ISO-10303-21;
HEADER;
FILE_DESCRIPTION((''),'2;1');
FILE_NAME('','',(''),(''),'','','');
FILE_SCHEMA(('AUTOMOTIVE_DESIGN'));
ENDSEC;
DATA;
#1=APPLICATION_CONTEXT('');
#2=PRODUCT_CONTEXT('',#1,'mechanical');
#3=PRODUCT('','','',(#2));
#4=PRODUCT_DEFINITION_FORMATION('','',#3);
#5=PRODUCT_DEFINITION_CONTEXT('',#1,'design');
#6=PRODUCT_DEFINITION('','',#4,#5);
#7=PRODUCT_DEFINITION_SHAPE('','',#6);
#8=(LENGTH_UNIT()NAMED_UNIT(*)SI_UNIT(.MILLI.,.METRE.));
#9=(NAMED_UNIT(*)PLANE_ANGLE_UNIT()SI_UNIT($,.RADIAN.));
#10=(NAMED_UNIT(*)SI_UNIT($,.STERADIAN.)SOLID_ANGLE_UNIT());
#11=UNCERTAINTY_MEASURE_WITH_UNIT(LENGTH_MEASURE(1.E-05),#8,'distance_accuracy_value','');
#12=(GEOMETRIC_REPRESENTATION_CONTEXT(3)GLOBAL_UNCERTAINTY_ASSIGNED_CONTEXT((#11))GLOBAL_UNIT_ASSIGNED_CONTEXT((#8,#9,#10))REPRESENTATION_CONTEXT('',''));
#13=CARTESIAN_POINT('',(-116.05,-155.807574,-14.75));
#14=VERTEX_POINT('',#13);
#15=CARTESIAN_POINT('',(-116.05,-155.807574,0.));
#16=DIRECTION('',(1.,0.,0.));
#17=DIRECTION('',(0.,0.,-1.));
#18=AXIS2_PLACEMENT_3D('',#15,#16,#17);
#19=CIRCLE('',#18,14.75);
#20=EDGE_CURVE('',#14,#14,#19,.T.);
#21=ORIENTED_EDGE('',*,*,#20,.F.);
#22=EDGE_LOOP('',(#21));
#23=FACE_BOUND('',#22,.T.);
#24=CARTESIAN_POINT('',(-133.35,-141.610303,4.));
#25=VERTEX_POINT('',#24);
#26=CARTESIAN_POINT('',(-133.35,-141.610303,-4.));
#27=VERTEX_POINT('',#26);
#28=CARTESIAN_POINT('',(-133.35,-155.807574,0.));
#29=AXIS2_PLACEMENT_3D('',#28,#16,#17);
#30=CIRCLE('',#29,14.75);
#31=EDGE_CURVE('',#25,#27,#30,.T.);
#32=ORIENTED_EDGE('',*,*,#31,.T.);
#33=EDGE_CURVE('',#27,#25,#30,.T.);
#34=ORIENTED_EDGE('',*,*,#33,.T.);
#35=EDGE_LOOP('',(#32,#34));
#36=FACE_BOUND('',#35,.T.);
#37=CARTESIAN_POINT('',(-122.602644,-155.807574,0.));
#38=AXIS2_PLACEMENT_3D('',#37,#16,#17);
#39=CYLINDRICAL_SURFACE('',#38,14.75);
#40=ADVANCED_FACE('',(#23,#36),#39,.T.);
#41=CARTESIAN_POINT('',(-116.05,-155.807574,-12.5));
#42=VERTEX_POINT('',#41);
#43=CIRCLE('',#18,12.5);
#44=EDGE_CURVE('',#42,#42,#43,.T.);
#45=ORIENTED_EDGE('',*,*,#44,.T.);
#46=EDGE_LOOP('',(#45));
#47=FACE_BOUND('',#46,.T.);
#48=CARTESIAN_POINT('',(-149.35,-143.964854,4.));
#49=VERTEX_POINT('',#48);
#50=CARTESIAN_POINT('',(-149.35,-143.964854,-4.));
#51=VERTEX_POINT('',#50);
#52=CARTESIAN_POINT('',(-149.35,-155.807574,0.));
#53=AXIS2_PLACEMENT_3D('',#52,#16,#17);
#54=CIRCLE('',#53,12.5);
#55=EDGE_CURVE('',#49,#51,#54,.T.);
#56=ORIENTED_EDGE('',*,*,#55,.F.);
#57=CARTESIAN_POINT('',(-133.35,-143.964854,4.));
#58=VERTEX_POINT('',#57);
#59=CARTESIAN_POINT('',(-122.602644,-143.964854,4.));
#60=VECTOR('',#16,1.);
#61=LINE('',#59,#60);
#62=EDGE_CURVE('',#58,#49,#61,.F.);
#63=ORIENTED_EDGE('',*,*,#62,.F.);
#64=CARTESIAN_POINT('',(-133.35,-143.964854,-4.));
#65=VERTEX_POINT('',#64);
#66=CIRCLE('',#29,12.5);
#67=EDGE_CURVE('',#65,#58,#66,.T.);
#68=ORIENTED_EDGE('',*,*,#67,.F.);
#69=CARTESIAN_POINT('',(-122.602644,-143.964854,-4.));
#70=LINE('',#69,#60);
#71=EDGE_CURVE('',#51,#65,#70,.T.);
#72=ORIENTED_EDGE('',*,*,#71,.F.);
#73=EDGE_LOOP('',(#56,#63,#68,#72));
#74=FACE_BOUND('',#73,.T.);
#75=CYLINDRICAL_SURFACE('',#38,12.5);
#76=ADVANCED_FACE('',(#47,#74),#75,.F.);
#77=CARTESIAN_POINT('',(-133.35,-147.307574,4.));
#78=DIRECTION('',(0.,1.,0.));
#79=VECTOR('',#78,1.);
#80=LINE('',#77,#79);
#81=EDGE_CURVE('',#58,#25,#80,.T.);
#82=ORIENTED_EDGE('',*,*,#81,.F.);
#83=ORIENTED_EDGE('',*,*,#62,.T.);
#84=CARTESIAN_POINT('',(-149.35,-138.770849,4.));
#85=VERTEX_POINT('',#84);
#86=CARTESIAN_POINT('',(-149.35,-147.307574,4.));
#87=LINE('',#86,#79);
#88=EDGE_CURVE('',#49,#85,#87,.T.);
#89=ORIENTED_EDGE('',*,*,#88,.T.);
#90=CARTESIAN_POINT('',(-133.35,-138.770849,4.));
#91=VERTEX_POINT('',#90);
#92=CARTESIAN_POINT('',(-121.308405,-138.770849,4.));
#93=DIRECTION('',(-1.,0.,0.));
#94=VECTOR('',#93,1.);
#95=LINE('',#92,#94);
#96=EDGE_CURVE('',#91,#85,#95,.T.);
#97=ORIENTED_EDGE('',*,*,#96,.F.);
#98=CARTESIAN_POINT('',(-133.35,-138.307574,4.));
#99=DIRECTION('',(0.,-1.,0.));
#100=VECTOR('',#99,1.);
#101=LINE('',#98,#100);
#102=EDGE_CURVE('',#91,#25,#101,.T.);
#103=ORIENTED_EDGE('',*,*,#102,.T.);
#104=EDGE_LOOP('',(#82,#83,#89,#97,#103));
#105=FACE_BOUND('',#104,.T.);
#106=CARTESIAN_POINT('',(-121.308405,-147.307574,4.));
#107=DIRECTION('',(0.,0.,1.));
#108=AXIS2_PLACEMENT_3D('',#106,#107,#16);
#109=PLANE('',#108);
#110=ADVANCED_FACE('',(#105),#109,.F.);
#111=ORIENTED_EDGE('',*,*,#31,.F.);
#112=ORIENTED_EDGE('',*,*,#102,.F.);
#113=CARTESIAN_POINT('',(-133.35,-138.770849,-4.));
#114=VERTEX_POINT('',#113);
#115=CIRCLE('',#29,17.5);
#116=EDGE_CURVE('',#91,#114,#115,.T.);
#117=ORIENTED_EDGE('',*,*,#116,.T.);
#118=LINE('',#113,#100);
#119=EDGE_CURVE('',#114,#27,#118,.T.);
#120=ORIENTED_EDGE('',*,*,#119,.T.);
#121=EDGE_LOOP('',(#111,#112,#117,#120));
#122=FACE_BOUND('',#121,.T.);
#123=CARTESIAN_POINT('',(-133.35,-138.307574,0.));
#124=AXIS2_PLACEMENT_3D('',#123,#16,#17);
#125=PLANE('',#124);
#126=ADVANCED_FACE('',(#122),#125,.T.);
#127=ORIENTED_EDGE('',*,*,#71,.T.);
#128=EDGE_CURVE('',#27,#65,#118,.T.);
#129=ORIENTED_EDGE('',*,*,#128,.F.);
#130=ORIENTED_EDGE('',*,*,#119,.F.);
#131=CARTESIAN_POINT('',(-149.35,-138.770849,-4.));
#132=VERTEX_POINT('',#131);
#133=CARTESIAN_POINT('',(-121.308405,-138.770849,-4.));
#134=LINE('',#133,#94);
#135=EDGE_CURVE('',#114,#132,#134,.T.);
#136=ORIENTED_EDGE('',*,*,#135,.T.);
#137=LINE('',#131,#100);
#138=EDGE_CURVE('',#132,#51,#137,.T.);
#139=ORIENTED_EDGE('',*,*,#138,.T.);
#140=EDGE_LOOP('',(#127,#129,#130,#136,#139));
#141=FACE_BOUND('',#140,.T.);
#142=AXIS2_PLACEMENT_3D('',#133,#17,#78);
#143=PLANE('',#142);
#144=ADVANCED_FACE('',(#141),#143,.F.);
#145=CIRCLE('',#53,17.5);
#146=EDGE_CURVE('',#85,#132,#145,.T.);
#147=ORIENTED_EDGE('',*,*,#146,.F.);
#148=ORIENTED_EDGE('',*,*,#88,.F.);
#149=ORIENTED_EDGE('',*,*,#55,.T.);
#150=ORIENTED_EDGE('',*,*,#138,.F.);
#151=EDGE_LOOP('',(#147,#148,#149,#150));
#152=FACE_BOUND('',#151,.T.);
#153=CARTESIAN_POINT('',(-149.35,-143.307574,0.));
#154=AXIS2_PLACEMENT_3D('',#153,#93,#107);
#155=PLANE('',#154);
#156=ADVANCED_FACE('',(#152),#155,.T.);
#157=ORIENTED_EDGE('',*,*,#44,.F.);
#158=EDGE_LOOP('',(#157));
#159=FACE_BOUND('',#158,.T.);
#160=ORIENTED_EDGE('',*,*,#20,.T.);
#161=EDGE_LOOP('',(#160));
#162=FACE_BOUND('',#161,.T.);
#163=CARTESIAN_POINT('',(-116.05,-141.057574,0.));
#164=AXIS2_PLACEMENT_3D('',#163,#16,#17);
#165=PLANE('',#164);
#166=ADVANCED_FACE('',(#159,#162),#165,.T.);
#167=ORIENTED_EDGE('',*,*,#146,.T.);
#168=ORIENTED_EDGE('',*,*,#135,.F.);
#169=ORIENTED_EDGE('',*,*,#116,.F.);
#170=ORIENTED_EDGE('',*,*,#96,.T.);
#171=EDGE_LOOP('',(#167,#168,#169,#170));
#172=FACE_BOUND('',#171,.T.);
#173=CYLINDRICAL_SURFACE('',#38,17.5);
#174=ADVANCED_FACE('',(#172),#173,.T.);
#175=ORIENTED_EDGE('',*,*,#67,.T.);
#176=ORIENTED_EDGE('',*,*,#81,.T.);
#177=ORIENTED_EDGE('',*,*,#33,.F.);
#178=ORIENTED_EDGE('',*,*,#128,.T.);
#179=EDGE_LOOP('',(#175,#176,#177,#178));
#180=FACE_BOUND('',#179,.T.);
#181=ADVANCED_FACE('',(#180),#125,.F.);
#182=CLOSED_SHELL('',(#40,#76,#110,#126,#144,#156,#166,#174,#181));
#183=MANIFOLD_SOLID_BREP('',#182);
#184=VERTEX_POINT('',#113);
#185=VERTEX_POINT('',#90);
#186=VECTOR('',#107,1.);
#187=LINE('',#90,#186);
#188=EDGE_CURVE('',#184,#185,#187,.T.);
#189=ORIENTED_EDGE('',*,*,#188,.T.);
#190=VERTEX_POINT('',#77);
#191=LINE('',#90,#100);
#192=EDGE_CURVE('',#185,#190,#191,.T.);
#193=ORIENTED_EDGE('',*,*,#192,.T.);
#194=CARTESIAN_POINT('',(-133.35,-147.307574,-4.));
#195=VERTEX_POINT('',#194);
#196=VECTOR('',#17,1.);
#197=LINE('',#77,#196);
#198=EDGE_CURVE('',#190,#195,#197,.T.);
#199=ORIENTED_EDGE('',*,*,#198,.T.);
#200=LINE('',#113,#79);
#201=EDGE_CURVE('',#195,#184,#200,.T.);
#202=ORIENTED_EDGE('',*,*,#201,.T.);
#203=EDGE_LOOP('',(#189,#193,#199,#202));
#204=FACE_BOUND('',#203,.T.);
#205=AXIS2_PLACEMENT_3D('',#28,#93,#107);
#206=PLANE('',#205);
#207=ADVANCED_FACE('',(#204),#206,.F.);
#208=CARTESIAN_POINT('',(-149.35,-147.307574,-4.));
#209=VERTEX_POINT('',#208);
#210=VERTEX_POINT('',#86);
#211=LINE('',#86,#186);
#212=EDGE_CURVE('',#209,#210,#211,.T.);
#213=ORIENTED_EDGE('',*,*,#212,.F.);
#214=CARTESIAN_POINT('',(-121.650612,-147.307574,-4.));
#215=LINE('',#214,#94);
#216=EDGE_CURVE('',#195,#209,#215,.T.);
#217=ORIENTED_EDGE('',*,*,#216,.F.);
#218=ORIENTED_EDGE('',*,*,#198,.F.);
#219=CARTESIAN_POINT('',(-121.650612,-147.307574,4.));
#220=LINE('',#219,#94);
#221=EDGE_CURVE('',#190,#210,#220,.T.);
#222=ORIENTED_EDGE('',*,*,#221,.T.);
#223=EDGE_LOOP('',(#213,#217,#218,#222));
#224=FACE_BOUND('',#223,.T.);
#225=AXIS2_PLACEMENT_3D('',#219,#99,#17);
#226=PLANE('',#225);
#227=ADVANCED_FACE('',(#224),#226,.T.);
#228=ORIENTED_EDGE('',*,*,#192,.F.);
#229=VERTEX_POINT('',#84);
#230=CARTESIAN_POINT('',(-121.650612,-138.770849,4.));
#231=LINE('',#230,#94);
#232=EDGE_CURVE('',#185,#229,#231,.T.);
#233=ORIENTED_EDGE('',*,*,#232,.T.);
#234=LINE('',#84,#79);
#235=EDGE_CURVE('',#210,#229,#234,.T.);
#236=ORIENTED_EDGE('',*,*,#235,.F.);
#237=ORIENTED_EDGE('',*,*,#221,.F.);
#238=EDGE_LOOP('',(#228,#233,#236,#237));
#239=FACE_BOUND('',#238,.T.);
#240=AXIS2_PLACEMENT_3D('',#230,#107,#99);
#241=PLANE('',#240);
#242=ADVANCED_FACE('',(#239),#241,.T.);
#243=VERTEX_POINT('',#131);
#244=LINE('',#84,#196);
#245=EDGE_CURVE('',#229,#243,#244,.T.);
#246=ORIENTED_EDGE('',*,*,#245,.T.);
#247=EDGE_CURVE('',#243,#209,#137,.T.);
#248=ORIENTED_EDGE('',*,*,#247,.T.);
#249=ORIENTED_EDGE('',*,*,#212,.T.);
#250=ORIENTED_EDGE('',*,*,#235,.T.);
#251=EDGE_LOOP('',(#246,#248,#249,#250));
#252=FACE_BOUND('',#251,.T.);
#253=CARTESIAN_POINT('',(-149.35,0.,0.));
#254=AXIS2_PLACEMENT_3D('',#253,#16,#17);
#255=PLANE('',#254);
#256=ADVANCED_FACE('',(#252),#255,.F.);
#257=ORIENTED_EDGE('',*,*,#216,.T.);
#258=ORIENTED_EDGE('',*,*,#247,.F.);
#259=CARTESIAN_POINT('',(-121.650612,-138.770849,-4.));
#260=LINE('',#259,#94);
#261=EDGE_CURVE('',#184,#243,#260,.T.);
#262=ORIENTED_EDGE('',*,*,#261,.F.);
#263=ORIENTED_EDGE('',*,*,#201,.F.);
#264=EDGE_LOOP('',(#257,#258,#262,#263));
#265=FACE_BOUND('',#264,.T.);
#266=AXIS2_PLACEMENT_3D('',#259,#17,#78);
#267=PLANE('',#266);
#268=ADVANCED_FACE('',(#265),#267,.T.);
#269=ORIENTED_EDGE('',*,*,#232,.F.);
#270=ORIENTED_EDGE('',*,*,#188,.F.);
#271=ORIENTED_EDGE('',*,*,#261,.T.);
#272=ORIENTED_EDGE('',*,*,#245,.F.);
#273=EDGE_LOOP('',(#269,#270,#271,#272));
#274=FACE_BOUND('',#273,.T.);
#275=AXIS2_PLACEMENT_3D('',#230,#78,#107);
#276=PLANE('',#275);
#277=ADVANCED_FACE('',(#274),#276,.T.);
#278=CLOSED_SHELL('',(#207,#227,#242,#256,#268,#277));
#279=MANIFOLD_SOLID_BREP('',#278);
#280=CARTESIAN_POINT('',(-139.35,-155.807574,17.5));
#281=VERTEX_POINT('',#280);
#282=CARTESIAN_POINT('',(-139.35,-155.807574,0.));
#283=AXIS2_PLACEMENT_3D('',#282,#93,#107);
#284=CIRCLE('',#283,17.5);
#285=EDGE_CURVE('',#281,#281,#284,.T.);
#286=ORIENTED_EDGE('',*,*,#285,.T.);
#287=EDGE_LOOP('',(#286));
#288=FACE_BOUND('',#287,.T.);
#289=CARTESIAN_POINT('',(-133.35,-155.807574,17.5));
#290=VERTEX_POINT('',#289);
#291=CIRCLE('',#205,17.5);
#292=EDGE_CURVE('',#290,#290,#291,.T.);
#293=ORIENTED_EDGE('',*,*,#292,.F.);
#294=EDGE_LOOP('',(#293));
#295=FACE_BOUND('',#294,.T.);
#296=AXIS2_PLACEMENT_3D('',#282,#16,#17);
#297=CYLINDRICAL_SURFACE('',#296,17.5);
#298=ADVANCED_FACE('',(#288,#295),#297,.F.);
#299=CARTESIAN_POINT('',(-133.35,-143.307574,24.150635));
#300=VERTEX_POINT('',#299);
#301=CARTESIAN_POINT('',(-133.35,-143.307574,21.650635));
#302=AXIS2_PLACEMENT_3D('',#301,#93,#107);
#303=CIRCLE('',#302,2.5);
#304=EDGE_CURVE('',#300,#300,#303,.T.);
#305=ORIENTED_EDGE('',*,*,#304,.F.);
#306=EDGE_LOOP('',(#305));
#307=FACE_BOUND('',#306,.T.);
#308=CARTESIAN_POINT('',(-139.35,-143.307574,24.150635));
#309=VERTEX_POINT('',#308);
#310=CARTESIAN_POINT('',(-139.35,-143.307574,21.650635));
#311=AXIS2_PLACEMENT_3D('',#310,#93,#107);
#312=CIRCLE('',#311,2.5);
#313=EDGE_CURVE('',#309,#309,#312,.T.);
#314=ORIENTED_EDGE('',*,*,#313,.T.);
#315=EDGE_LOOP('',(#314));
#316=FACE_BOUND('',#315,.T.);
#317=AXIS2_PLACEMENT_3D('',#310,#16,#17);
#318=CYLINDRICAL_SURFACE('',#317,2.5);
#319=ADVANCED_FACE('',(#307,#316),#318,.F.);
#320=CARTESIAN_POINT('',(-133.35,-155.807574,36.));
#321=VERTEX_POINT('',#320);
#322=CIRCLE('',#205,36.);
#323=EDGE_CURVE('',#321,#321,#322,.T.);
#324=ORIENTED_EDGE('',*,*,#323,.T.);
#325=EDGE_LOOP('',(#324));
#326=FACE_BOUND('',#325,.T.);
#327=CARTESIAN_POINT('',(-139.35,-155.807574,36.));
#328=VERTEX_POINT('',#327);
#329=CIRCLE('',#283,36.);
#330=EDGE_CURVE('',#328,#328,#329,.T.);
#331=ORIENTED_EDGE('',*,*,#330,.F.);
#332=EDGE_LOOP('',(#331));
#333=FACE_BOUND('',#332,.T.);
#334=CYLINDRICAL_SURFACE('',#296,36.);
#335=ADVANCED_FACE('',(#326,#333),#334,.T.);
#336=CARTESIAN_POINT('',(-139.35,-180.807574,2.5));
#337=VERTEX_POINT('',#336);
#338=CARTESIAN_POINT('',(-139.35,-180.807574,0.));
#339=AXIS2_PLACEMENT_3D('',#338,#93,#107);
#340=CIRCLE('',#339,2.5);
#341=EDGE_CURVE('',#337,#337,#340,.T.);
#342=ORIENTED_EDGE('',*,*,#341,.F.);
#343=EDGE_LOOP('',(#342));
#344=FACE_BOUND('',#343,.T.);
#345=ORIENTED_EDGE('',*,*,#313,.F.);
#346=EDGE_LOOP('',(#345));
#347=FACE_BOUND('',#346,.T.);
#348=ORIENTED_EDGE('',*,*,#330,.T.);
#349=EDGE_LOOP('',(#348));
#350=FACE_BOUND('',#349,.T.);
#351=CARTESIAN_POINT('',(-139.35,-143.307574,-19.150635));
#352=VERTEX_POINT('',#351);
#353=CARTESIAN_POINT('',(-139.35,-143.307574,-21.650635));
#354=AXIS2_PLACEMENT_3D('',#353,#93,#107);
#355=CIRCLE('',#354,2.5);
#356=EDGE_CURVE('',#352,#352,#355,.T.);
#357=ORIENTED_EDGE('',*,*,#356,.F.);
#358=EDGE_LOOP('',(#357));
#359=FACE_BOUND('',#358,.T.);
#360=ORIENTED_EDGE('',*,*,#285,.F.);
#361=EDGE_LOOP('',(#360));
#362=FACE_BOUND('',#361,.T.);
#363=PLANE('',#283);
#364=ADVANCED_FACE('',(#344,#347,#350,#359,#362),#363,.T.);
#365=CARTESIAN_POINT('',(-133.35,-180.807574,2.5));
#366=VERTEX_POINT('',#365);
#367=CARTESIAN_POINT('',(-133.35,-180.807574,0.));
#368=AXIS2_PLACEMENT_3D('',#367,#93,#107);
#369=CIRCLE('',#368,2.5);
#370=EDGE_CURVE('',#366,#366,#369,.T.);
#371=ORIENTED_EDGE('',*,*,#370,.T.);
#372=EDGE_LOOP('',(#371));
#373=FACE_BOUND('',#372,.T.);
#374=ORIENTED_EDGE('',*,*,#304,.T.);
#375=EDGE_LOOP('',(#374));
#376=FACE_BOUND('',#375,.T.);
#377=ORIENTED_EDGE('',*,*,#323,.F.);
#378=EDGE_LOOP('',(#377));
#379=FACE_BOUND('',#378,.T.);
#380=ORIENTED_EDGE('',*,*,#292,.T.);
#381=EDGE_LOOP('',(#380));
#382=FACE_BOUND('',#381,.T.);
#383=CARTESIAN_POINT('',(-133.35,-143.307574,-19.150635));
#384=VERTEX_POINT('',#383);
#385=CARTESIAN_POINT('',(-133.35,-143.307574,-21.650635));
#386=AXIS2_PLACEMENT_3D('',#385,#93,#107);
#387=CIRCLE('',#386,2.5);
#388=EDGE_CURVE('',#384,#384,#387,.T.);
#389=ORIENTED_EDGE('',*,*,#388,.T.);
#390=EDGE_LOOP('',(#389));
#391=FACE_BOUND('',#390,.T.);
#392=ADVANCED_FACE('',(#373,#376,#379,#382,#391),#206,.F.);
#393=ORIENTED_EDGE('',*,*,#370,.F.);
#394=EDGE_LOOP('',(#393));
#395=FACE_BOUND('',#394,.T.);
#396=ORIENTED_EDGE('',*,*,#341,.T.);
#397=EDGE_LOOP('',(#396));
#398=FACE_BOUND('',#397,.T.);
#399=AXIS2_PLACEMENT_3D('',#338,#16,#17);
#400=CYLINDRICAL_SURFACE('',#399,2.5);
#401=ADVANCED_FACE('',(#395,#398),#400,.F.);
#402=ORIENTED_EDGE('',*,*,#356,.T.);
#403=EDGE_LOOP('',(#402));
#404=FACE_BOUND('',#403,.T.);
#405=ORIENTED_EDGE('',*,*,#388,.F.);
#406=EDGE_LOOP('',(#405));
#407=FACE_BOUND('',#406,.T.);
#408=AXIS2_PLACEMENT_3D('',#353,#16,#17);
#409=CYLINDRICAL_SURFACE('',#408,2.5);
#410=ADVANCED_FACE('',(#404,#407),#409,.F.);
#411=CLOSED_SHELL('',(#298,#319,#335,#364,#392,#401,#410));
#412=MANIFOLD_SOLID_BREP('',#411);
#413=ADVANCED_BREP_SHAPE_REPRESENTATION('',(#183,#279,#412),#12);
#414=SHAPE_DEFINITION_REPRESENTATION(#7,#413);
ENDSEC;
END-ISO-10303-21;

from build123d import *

# Parameters (mm, degrees)
SKETCH_2_R             = 36
SKETCH_2_R_2           = 17.5
SKETCH_2_R_3           = 2.5
SM_BASE_FLANGE_1_DEPTH = 6
CUT_EXTRUDE_START      = -16
CUT_EXTRUDE_1_DEPTH    = 16
SKETCH_9_W             = 8
SKETCH_9_H             = 8.536725037
EXTRUDE_1_DEPTH        = 16


# Sheet-metal steps are written as plain solids
with BuildPart() as part:
    # Sketch 1 → Повернуть1 (revolve)
    with BuildSketch(Plane.XY, mode=Mode.PRIVATE) as revolve_1_sk:
        Polygon((-116.05, -143.307573628), (-149.35, -143.307573628), (-149.35, -138.307573628), (-133.35, -138.307573628), (-133.35, -141.057573628), (-116.05, -141.057573628), align=None)
    revolve(revolve_1_sk.sketch.rotate(Axis((-122.60264377, -155.807573628, 0), (-1, 0, 0)), 90), axis=Axis((-122.60264377, -155.807573628, 0), (-1, 0, 0)))

    # Эскиз8 → Вырез-Вытянуть1 (cut)
    with BuildSketch(Plane.ZY.offset(149.35).offset(CUT_EXTRUDE_START)):
        with BuildLine():
            Line((-4, -138.770848591), (-4, -147.307573628))
            Line((-4, -147.307573628), (4, -147.307573628))
            Line((4, -147.307573628), (4, -138.770848591))
            ThreePointArc((4, -138.770848591), (0, -138.307573628), (-4, -138.770848591))
        make_face()
    extrude(amount=CUT_EXTRUDE_1_DEPTH, mode=Mode.SUBTRACT)


with BuildPart() as body_2:
    # Sketch 2 → Базовая кромка1 (new body)
    with BuildSketch(Plane.ZY.offset(133.35)):
        with Locations((0, -155.807573628)):
            Circle(SKETCH_2_R)
        with Locations((0, -155.807573628)):
            Circle(SKETCH_2_R_2, mode=Mode.SUBTRACT)
        with Locations((-21.650635095, -143.307573628)):
            Circle(SKETCH_2_R_3, mode=Mode.SUBTRACT)
        with Locations((0, -180.807573628)):
            Circle(SKETCH_2_R_3, mode=Mode.SUBTRACT)
        with Locations((21.650635095, -143.307573628)):
            Circle(SKETCH_2_R_3, mode=Mode.SUBTRACT)
    extrude(amount=SM_BASE_FLANGE_1_DEPTH)


with BuildPart() as body_3:
    # Эскиз9 → Бобышка-Вытянуть1 (new body)
    with BuildSketch(Plane.ZY.offset(149.35)):
        with Locations((0, -143.03921111)):
            Rectangle(SKETCH_9_W, SKETCH_9_H)
    extrude(amount=-EXTRUDE_1_DEPTH)


solid = Compound([part.part, body_2.part, body_3.part])
